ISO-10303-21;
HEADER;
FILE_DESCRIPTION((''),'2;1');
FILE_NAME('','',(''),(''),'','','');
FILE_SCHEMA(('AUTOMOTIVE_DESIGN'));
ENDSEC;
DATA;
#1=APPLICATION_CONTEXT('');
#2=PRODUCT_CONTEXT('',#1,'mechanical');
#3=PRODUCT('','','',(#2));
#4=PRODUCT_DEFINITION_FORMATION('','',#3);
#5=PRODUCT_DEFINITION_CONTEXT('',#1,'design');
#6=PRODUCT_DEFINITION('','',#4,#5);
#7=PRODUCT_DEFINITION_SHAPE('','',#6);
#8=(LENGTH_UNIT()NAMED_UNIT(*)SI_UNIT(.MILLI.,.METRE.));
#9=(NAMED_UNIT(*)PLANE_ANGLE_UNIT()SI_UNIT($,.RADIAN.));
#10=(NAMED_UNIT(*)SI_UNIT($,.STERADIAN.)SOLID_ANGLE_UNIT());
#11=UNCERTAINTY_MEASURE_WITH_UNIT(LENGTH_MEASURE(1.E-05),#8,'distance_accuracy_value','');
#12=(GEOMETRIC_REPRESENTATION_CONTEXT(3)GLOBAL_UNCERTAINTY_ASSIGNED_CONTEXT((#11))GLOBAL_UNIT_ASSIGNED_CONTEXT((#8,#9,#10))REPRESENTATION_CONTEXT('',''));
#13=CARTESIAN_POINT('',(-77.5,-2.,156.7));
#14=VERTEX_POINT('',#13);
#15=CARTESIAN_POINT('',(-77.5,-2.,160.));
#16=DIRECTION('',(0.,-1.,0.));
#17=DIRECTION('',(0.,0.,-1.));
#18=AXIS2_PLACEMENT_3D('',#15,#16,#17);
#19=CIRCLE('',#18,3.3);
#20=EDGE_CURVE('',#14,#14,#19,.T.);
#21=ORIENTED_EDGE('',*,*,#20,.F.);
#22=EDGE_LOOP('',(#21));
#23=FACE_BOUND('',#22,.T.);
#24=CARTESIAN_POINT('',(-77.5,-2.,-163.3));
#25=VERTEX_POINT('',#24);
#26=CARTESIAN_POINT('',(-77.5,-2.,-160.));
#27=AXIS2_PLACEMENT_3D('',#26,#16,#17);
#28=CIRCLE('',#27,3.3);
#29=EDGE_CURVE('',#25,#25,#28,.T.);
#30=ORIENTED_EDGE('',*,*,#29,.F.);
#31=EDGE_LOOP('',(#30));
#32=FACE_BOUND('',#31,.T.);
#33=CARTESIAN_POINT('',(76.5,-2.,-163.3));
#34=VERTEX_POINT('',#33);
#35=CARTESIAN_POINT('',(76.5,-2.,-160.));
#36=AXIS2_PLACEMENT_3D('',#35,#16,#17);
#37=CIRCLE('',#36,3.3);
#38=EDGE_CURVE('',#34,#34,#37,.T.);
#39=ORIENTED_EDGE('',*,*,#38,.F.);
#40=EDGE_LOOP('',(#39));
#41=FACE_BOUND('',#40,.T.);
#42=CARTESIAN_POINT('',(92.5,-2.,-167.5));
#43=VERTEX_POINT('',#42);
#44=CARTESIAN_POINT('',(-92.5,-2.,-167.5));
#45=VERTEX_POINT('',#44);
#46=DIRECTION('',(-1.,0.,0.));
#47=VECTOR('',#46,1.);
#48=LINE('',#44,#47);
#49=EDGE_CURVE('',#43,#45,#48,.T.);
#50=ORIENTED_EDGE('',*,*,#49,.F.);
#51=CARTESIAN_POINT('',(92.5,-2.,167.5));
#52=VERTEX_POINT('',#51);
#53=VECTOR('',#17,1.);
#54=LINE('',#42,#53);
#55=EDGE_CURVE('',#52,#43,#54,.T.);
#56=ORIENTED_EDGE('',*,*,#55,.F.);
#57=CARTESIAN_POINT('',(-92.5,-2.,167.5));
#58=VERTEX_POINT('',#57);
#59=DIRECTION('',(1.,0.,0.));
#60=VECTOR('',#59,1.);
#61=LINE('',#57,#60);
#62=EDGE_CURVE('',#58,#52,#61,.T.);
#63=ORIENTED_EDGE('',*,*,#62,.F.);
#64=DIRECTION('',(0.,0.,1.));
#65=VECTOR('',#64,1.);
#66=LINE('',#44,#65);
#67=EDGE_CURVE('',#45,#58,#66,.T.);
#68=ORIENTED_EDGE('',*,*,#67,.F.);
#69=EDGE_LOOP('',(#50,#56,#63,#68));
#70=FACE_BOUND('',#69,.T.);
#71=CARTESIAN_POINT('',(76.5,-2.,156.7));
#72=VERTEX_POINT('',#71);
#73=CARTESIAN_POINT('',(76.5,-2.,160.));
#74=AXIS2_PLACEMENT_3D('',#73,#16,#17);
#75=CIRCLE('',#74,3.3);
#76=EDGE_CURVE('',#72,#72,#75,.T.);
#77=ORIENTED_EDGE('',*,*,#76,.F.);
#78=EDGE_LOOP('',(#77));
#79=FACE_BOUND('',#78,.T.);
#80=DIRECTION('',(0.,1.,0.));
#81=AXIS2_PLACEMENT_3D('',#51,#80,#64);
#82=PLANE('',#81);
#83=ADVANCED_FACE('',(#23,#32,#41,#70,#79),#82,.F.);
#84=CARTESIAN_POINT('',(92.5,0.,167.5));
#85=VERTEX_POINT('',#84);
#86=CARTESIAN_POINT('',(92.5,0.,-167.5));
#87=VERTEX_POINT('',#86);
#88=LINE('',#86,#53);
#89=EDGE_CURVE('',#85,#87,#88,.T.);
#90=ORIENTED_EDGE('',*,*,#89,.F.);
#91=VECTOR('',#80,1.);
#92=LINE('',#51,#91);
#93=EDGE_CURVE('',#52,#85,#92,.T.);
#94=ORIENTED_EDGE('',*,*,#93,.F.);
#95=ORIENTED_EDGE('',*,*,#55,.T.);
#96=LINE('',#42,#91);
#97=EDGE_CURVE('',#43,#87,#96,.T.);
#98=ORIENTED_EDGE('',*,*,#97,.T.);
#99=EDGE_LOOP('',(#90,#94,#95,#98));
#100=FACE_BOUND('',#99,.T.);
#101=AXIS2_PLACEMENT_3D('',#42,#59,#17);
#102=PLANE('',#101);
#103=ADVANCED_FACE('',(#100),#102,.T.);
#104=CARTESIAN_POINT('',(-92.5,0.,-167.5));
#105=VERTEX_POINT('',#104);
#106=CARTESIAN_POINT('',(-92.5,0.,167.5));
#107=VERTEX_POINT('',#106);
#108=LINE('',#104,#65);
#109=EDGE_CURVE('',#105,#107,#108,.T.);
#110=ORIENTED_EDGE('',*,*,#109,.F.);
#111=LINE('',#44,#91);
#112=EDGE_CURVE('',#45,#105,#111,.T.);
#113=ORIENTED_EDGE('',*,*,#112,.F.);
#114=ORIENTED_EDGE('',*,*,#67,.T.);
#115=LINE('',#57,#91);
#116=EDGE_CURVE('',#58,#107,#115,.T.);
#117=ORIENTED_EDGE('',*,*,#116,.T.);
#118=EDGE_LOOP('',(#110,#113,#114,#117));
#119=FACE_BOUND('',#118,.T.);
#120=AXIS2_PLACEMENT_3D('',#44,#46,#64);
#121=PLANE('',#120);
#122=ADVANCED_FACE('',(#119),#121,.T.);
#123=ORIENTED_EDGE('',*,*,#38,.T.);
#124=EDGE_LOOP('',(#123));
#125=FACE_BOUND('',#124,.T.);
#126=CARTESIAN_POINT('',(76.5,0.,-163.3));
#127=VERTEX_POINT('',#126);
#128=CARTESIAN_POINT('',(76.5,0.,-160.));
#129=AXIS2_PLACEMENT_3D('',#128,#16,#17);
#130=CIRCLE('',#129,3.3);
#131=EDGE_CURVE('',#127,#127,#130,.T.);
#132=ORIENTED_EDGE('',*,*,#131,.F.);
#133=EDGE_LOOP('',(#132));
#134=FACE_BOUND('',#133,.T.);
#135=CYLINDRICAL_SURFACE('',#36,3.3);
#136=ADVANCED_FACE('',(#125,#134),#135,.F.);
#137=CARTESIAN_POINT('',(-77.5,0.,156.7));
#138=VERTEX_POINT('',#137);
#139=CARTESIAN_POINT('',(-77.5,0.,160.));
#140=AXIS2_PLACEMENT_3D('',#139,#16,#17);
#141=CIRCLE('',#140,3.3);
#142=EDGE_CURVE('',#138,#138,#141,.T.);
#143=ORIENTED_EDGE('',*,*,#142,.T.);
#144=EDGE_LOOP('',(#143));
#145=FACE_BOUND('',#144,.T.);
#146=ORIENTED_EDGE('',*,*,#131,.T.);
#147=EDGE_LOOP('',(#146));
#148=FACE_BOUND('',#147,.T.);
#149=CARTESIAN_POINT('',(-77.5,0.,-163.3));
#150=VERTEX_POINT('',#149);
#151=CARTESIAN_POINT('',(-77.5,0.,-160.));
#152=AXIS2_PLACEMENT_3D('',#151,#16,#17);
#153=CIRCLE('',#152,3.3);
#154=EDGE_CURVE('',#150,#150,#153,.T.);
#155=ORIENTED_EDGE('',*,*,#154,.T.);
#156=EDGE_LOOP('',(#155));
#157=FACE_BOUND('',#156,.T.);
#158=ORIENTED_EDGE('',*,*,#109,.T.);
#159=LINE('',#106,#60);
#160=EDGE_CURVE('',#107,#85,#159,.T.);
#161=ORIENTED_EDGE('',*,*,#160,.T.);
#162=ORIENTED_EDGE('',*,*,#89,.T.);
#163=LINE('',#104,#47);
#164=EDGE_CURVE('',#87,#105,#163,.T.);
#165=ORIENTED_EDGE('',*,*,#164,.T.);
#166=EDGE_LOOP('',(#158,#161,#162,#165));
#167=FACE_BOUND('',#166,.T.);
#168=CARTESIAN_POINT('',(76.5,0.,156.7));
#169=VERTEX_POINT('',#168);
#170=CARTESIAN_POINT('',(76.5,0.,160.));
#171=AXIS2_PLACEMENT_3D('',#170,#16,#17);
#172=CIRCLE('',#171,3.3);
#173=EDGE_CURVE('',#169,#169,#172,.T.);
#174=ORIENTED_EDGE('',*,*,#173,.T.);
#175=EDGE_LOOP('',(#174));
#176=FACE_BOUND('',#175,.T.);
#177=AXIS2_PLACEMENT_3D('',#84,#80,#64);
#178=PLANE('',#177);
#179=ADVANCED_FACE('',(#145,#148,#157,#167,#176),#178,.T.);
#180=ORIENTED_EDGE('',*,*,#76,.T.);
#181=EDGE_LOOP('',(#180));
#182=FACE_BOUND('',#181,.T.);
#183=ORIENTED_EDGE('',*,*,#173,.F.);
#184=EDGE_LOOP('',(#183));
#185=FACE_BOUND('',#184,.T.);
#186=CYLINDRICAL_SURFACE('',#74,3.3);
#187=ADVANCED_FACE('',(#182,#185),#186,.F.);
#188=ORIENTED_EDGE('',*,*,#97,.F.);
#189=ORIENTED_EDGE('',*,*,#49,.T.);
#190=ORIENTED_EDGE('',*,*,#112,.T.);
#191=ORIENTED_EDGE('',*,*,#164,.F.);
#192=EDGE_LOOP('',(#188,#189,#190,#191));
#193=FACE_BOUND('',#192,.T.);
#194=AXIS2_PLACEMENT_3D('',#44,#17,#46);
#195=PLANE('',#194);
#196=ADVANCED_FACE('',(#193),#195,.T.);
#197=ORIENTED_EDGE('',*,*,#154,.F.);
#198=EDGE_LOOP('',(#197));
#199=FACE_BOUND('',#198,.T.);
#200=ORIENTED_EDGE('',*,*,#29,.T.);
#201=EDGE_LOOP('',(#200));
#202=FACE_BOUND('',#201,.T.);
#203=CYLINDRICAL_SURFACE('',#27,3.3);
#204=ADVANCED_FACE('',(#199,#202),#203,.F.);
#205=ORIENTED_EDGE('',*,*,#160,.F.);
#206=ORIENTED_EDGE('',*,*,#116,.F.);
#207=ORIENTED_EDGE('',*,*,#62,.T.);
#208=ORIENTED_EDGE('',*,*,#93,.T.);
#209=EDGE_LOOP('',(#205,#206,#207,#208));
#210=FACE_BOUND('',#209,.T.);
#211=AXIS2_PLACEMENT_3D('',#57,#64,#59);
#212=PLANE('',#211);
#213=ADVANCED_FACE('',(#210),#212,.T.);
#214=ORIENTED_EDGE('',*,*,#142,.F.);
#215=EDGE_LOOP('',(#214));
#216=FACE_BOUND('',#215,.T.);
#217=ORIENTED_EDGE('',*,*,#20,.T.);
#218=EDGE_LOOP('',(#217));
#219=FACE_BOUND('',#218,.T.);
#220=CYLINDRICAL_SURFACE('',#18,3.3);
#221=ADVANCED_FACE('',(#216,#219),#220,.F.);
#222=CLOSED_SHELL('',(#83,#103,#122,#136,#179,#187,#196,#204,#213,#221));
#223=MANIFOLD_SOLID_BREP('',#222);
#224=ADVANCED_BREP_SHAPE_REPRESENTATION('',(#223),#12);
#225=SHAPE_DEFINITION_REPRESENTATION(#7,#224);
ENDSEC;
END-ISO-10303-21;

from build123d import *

# Parameters (mm, degrees)
SKIZZE2_W                = 185
SKIZZE2_H                = 335
BASIS_BLECH1_DEPTH       = 2
DURCHGANGSLOCH_F_R_M61_D = 6.6


# Sheet-metal steps are written as plain solids
with BuildPart() as part:
    # Skizze2 → Basis-Blech1 (new body)
    with BuildSketch(Plane(origin=(0, 0, 0), x_dir=(1, 0, 0), z_dir=(0, 1, 0))):
        Rectangle(SKIZZE2_W, SKIZZE2_H)
    extrude(amount=-BASIS_BLECH1_DEPTH)

    # Durchgangsloch für M61 (through all)
    with Locations(Plane(origin=(0, -2, 0), x_dir=(-1, 0, 0), z_dir=(0, -1, 0))):
        with Locations((-76.5, -160), (77.5, -160), (77.5, 160), (-76.5, 160)):
            Hole(DURCHGANGSLOCH_F_R_M61_D / 2)


solid = part.part
